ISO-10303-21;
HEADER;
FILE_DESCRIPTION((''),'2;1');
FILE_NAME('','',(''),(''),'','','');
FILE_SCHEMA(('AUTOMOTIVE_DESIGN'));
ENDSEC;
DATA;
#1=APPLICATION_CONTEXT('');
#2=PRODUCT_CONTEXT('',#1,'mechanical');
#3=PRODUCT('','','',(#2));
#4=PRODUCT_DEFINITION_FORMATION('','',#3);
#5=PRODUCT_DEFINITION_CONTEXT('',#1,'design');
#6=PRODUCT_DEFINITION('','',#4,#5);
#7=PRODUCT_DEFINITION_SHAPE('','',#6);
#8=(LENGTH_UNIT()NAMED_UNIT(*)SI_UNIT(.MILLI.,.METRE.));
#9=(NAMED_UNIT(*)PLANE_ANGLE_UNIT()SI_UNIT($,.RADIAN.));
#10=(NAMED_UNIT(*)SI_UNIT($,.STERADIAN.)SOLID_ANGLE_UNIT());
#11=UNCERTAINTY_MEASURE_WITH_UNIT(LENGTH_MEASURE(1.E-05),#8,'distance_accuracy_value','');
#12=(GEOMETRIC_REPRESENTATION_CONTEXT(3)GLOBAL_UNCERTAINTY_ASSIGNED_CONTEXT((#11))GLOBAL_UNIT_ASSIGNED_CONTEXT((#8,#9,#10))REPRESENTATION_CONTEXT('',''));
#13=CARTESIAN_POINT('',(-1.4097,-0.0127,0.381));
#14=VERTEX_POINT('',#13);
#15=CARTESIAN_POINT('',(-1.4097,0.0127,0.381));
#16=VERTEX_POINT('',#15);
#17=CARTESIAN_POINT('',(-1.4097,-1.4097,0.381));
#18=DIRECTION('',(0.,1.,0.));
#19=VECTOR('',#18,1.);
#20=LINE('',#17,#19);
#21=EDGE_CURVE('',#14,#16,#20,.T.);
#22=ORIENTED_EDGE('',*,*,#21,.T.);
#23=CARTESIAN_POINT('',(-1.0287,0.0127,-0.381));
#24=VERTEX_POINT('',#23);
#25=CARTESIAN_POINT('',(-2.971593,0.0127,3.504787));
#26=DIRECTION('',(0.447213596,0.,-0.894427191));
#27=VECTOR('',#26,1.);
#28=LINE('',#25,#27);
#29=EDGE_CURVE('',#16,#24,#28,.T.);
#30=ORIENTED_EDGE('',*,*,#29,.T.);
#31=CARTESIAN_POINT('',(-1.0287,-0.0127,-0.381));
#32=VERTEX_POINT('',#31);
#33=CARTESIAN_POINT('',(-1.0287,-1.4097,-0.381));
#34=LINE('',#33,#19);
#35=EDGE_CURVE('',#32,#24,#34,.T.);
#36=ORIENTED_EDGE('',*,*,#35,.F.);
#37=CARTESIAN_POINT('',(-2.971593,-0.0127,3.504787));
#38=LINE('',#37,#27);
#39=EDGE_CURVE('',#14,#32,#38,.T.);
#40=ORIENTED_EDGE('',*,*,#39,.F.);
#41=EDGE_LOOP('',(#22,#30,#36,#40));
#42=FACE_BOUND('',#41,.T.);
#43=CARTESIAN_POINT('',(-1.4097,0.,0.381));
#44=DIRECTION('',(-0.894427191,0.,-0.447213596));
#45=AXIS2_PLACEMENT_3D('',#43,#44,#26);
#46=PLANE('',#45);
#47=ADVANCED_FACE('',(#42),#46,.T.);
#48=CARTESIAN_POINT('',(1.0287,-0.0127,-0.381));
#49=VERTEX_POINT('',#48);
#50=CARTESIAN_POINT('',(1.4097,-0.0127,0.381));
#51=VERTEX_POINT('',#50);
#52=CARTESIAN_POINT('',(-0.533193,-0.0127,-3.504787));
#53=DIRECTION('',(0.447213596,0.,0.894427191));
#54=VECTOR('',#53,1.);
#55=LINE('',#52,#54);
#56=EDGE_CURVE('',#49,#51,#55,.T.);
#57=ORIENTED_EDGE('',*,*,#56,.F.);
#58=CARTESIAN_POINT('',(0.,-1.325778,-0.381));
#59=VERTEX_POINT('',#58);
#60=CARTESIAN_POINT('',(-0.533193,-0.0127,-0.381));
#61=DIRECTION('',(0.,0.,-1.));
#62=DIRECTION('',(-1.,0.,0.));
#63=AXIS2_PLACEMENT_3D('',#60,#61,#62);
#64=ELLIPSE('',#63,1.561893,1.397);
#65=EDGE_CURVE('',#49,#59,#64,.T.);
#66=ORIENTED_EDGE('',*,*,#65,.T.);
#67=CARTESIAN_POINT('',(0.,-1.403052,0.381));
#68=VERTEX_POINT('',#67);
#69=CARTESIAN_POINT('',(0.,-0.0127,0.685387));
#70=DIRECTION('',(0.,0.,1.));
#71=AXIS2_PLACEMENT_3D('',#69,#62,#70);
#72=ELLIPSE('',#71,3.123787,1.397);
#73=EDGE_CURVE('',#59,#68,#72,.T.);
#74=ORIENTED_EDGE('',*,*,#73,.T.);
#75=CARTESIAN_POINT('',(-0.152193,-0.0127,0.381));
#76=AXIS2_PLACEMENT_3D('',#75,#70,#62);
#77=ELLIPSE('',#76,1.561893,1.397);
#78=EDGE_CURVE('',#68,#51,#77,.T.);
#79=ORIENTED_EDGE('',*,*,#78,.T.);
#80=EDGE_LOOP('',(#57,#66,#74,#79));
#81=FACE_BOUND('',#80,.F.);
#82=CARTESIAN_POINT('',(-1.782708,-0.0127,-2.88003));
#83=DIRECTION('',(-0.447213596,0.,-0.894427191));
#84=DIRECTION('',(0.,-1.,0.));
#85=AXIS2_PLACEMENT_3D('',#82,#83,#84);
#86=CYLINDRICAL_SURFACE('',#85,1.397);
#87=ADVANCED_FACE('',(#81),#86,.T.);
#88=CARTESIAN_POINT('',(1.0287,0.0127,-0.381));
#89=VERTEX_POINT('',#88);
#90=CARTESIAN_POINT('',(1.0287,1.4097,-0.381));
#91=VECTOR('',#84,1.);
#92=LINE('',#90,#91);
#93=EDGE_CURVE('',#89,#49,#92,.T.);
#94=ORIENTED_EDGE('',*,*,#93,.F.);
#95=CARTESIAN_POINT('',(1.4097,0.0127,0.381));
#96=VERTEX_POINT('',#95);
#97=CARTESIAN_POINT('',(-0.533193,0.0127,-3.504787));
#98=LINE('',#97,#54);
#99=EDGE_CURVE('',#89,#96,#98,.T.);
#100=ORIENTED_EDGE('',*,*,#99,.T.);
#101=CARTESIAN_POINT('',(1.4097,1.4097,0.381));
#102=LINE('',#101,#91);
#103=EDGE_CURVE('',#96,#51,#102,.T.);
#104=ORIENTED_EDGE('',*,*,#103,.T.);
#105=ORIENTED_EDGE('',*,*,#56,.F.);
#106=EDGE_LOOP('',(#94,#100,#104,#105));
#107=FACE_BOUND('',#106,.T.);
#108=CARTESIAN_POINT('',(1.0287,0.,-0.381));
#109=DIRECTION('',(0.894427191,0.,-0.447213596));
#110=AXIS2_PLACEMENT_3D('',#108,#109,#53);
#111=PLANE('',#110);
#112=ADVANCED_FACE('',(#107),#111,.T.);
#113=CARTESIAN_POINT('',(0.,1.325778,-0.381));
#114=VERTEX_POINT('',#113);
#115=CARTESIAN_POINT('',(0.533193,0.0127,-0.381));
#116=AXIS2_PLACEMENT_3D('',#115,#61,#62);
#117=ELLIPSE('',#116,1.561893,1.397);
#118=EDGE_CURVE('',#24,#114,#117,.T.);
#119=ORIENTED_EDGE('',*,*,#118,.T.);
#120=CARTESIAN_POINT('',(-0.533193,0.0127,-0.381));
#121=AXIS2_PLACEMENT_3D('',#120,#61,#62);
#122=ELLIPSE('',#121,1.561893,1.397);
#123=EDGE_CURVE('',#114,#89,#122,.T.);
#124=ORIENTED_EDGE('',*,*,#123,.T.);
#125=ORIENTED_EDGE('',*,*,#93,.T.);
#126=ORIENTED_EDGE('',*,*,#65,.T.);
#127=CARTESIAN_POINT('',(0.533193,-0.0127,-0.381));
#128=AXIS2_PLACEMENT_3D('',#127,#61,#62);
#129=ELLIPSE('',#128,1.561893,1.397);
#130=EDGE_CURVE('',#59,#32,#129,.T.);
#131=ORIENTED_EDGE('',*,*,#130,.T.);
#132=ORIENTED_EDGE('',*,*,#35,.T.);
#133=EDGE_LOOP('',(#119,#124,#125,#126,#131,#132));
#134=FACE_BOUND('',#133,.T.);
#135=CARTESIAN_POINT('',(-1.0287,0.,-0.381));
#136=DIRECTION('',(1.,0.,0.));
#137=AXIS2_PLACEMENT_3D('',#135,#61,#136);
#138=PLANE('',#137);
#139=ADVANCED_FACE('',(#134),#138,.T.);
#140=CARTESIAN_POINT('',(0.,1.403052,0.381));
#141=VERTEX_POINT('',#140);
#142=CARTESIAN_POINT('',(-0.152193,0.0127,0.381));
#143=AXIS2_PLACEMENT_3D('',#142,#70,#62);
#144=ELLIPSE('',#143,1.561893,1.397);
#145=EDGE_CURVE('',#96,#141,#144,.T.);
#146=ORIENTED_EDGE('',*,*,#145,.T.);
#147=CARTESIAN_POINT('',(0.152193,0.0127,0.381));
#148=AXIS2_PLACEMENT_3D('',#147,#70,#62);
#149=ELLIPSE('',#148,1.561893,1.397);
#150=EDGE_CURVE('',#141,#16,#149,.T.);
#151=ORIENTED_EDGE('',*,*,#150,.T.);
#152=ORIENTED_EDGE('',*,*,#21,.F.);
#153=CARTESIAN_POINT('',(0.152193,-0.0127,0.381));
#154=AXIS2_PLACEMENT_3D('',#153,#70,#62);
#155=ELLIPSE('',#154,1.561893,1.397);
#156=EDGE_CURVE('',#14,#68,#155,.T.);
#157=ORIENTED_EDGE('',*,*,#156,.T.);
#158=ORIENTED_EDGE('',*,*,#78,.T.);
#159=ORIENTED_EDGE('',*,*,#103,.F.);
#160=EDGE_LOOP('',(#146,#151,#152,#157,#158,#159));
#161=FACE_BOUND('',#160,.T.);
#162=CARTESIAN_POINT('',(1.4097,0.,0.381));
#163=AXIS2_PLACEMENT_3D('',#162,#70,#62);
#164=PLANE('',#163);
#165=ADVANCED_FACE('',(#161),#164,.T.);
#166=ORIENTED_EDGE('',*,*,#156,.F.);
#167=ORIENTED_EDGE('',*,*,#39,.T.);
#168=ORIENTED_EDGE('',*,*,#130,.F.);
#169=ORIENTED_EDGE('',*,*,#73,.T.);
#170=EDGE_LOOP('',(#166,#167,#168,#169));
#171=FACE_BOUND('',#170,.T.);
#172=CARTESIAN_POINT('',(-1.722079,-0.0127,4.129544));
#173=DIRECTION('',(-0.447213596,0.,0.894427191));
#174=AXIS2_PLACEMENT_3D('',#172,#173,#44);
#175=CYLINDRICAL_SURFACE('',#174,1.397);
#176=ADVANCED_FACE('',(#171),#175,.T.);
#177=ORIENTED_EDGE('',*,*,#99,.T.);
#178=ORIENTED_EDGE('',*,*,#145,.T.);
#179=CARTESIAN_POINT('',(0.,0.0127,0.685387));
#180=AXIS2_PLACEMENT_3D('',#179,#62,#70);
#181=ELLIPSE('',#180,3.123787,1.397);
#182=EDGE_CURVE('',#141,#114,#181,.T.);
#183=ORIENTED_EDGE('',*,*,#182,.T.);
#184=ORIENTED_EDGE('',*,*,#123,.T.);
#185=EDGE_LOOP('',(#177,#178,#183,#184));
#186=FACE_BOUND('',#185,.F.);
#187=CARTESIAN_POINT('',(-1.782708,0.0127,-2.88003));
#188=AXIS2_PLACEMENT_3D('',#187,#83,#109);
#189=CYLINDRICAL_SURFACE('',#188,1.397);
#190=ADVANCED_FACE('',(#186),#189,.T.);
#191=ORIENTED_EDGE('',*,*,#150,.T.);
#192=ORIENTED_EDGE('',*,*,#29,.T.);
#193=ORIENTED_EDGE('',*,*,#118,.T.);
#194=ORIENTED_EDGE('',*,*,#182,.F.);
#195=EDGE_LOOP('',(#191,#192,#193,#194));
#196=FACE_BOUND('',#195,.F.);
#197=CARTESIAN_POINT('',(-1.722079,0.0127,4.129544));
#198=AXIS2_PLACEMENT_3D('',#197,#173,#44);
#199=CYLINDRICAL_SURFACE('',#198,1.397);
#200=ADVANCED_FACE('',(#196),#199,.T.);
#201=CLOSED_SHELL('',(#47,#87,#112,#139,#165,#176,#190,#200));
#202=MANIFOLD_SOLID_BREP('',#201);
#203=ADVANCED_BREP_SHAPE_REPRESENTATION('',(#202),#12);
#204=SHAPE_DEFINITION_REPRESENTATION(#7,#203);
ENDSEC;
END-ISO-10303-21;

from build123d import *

# Parameters (mm, degrees)
F1_DEPTH    = 1.4097
F2_T1_DEPTH = 7.8369418994
F2_T3_DEPTH = 7.8369418994


# Not quite as in the source:
# - a fillet or chamfer that OpenCascade refuses, or shapes differently, is made with other operations: its cross-section is extruded or revolved along the edge and cut away or added


with BuildPart() as f1:
    # F0 (on Front) → F1 (new body, symmetric)
    with BuildSketch(Plane.XZ):
        Polygon((-1.0287, -0.381), (1.0287, -0.381), (1.4097, 0.381), (-1.4097, 0.381), align=None)
    extrude(amount=F1_DEPTH, both=True)

    # F2: fillet of radius 1.397 on 4 edges, made by hand

    # F2_s2 → F2_t1 (cut)
    with BuildSketch(Plane(origin=(-1.9962334823, 0, 3.9924669646), x_dir=(0, 1, 0), z_dir=(0.4472135955, 0, -0.894427191))):
        with BuildLine():
            ThreePointArc((0.0127, -1.0904856313), (1.0005281733, -0.6813138046), (1.4097, 0.3065143687))
            Line((1.4097, 0.3065143687), (1.4097, -1.0904856313))
            Line((1.4097, -1.0904856313), (0.0127, -1.0904856313))
        make_face()
        with BuildLine():
            ThreePointArc((-0.0127, -1.0904856313), (-1.0005281733, -0.6813138046), (-1.4097, 0.3065143687))
            Line((-1.4097, 0.3065143687), (-1.4097, -1.0904856313))
            Line((-1.4097, -1.0904856313), (-0.0127, -1.0904856313))
        make_face()
    extrude(amount=F2_T1_DEPTH, mode=Mode.SUBTRACT)

    # F2_s4 → F2_t3 (cut)
    with BuildSketch(Plane(origin=(-1.5085534823, 0, -3.0171069646), x_dir=(0, 1, 0), z_dir=(0.4472135955, 0, 0.894427191))):
        with BuildLine():
            ThreePointArc((-1.4097, 0.3065143687), (-1.0005281733, -0.6813138046), (-0.0127, -1.0904856313))
            Line((-0.0127, -1.0904856313), (-1.4097, -1.0904856313))
            Line((-1.4097, -1.0904856313), (-1.4097, 0.3065143687))
        make_face()
        with BuildLine():
            ThreePointArc((0.0127, -1.0904856313), (1.0005281733, -0.6813138046), (1.4097, 0.3065143687))
            Line((1.4097, 0.3065143687), (1.4097, -1.0904856313))
            Line((1.4097, -1.0904856313), (0.0127, -1.0904856313))
        make_face()
    extrude(amount=F2_T3_DEPTH, mode=Mode.SUBTRACT)


solid = f1.part
